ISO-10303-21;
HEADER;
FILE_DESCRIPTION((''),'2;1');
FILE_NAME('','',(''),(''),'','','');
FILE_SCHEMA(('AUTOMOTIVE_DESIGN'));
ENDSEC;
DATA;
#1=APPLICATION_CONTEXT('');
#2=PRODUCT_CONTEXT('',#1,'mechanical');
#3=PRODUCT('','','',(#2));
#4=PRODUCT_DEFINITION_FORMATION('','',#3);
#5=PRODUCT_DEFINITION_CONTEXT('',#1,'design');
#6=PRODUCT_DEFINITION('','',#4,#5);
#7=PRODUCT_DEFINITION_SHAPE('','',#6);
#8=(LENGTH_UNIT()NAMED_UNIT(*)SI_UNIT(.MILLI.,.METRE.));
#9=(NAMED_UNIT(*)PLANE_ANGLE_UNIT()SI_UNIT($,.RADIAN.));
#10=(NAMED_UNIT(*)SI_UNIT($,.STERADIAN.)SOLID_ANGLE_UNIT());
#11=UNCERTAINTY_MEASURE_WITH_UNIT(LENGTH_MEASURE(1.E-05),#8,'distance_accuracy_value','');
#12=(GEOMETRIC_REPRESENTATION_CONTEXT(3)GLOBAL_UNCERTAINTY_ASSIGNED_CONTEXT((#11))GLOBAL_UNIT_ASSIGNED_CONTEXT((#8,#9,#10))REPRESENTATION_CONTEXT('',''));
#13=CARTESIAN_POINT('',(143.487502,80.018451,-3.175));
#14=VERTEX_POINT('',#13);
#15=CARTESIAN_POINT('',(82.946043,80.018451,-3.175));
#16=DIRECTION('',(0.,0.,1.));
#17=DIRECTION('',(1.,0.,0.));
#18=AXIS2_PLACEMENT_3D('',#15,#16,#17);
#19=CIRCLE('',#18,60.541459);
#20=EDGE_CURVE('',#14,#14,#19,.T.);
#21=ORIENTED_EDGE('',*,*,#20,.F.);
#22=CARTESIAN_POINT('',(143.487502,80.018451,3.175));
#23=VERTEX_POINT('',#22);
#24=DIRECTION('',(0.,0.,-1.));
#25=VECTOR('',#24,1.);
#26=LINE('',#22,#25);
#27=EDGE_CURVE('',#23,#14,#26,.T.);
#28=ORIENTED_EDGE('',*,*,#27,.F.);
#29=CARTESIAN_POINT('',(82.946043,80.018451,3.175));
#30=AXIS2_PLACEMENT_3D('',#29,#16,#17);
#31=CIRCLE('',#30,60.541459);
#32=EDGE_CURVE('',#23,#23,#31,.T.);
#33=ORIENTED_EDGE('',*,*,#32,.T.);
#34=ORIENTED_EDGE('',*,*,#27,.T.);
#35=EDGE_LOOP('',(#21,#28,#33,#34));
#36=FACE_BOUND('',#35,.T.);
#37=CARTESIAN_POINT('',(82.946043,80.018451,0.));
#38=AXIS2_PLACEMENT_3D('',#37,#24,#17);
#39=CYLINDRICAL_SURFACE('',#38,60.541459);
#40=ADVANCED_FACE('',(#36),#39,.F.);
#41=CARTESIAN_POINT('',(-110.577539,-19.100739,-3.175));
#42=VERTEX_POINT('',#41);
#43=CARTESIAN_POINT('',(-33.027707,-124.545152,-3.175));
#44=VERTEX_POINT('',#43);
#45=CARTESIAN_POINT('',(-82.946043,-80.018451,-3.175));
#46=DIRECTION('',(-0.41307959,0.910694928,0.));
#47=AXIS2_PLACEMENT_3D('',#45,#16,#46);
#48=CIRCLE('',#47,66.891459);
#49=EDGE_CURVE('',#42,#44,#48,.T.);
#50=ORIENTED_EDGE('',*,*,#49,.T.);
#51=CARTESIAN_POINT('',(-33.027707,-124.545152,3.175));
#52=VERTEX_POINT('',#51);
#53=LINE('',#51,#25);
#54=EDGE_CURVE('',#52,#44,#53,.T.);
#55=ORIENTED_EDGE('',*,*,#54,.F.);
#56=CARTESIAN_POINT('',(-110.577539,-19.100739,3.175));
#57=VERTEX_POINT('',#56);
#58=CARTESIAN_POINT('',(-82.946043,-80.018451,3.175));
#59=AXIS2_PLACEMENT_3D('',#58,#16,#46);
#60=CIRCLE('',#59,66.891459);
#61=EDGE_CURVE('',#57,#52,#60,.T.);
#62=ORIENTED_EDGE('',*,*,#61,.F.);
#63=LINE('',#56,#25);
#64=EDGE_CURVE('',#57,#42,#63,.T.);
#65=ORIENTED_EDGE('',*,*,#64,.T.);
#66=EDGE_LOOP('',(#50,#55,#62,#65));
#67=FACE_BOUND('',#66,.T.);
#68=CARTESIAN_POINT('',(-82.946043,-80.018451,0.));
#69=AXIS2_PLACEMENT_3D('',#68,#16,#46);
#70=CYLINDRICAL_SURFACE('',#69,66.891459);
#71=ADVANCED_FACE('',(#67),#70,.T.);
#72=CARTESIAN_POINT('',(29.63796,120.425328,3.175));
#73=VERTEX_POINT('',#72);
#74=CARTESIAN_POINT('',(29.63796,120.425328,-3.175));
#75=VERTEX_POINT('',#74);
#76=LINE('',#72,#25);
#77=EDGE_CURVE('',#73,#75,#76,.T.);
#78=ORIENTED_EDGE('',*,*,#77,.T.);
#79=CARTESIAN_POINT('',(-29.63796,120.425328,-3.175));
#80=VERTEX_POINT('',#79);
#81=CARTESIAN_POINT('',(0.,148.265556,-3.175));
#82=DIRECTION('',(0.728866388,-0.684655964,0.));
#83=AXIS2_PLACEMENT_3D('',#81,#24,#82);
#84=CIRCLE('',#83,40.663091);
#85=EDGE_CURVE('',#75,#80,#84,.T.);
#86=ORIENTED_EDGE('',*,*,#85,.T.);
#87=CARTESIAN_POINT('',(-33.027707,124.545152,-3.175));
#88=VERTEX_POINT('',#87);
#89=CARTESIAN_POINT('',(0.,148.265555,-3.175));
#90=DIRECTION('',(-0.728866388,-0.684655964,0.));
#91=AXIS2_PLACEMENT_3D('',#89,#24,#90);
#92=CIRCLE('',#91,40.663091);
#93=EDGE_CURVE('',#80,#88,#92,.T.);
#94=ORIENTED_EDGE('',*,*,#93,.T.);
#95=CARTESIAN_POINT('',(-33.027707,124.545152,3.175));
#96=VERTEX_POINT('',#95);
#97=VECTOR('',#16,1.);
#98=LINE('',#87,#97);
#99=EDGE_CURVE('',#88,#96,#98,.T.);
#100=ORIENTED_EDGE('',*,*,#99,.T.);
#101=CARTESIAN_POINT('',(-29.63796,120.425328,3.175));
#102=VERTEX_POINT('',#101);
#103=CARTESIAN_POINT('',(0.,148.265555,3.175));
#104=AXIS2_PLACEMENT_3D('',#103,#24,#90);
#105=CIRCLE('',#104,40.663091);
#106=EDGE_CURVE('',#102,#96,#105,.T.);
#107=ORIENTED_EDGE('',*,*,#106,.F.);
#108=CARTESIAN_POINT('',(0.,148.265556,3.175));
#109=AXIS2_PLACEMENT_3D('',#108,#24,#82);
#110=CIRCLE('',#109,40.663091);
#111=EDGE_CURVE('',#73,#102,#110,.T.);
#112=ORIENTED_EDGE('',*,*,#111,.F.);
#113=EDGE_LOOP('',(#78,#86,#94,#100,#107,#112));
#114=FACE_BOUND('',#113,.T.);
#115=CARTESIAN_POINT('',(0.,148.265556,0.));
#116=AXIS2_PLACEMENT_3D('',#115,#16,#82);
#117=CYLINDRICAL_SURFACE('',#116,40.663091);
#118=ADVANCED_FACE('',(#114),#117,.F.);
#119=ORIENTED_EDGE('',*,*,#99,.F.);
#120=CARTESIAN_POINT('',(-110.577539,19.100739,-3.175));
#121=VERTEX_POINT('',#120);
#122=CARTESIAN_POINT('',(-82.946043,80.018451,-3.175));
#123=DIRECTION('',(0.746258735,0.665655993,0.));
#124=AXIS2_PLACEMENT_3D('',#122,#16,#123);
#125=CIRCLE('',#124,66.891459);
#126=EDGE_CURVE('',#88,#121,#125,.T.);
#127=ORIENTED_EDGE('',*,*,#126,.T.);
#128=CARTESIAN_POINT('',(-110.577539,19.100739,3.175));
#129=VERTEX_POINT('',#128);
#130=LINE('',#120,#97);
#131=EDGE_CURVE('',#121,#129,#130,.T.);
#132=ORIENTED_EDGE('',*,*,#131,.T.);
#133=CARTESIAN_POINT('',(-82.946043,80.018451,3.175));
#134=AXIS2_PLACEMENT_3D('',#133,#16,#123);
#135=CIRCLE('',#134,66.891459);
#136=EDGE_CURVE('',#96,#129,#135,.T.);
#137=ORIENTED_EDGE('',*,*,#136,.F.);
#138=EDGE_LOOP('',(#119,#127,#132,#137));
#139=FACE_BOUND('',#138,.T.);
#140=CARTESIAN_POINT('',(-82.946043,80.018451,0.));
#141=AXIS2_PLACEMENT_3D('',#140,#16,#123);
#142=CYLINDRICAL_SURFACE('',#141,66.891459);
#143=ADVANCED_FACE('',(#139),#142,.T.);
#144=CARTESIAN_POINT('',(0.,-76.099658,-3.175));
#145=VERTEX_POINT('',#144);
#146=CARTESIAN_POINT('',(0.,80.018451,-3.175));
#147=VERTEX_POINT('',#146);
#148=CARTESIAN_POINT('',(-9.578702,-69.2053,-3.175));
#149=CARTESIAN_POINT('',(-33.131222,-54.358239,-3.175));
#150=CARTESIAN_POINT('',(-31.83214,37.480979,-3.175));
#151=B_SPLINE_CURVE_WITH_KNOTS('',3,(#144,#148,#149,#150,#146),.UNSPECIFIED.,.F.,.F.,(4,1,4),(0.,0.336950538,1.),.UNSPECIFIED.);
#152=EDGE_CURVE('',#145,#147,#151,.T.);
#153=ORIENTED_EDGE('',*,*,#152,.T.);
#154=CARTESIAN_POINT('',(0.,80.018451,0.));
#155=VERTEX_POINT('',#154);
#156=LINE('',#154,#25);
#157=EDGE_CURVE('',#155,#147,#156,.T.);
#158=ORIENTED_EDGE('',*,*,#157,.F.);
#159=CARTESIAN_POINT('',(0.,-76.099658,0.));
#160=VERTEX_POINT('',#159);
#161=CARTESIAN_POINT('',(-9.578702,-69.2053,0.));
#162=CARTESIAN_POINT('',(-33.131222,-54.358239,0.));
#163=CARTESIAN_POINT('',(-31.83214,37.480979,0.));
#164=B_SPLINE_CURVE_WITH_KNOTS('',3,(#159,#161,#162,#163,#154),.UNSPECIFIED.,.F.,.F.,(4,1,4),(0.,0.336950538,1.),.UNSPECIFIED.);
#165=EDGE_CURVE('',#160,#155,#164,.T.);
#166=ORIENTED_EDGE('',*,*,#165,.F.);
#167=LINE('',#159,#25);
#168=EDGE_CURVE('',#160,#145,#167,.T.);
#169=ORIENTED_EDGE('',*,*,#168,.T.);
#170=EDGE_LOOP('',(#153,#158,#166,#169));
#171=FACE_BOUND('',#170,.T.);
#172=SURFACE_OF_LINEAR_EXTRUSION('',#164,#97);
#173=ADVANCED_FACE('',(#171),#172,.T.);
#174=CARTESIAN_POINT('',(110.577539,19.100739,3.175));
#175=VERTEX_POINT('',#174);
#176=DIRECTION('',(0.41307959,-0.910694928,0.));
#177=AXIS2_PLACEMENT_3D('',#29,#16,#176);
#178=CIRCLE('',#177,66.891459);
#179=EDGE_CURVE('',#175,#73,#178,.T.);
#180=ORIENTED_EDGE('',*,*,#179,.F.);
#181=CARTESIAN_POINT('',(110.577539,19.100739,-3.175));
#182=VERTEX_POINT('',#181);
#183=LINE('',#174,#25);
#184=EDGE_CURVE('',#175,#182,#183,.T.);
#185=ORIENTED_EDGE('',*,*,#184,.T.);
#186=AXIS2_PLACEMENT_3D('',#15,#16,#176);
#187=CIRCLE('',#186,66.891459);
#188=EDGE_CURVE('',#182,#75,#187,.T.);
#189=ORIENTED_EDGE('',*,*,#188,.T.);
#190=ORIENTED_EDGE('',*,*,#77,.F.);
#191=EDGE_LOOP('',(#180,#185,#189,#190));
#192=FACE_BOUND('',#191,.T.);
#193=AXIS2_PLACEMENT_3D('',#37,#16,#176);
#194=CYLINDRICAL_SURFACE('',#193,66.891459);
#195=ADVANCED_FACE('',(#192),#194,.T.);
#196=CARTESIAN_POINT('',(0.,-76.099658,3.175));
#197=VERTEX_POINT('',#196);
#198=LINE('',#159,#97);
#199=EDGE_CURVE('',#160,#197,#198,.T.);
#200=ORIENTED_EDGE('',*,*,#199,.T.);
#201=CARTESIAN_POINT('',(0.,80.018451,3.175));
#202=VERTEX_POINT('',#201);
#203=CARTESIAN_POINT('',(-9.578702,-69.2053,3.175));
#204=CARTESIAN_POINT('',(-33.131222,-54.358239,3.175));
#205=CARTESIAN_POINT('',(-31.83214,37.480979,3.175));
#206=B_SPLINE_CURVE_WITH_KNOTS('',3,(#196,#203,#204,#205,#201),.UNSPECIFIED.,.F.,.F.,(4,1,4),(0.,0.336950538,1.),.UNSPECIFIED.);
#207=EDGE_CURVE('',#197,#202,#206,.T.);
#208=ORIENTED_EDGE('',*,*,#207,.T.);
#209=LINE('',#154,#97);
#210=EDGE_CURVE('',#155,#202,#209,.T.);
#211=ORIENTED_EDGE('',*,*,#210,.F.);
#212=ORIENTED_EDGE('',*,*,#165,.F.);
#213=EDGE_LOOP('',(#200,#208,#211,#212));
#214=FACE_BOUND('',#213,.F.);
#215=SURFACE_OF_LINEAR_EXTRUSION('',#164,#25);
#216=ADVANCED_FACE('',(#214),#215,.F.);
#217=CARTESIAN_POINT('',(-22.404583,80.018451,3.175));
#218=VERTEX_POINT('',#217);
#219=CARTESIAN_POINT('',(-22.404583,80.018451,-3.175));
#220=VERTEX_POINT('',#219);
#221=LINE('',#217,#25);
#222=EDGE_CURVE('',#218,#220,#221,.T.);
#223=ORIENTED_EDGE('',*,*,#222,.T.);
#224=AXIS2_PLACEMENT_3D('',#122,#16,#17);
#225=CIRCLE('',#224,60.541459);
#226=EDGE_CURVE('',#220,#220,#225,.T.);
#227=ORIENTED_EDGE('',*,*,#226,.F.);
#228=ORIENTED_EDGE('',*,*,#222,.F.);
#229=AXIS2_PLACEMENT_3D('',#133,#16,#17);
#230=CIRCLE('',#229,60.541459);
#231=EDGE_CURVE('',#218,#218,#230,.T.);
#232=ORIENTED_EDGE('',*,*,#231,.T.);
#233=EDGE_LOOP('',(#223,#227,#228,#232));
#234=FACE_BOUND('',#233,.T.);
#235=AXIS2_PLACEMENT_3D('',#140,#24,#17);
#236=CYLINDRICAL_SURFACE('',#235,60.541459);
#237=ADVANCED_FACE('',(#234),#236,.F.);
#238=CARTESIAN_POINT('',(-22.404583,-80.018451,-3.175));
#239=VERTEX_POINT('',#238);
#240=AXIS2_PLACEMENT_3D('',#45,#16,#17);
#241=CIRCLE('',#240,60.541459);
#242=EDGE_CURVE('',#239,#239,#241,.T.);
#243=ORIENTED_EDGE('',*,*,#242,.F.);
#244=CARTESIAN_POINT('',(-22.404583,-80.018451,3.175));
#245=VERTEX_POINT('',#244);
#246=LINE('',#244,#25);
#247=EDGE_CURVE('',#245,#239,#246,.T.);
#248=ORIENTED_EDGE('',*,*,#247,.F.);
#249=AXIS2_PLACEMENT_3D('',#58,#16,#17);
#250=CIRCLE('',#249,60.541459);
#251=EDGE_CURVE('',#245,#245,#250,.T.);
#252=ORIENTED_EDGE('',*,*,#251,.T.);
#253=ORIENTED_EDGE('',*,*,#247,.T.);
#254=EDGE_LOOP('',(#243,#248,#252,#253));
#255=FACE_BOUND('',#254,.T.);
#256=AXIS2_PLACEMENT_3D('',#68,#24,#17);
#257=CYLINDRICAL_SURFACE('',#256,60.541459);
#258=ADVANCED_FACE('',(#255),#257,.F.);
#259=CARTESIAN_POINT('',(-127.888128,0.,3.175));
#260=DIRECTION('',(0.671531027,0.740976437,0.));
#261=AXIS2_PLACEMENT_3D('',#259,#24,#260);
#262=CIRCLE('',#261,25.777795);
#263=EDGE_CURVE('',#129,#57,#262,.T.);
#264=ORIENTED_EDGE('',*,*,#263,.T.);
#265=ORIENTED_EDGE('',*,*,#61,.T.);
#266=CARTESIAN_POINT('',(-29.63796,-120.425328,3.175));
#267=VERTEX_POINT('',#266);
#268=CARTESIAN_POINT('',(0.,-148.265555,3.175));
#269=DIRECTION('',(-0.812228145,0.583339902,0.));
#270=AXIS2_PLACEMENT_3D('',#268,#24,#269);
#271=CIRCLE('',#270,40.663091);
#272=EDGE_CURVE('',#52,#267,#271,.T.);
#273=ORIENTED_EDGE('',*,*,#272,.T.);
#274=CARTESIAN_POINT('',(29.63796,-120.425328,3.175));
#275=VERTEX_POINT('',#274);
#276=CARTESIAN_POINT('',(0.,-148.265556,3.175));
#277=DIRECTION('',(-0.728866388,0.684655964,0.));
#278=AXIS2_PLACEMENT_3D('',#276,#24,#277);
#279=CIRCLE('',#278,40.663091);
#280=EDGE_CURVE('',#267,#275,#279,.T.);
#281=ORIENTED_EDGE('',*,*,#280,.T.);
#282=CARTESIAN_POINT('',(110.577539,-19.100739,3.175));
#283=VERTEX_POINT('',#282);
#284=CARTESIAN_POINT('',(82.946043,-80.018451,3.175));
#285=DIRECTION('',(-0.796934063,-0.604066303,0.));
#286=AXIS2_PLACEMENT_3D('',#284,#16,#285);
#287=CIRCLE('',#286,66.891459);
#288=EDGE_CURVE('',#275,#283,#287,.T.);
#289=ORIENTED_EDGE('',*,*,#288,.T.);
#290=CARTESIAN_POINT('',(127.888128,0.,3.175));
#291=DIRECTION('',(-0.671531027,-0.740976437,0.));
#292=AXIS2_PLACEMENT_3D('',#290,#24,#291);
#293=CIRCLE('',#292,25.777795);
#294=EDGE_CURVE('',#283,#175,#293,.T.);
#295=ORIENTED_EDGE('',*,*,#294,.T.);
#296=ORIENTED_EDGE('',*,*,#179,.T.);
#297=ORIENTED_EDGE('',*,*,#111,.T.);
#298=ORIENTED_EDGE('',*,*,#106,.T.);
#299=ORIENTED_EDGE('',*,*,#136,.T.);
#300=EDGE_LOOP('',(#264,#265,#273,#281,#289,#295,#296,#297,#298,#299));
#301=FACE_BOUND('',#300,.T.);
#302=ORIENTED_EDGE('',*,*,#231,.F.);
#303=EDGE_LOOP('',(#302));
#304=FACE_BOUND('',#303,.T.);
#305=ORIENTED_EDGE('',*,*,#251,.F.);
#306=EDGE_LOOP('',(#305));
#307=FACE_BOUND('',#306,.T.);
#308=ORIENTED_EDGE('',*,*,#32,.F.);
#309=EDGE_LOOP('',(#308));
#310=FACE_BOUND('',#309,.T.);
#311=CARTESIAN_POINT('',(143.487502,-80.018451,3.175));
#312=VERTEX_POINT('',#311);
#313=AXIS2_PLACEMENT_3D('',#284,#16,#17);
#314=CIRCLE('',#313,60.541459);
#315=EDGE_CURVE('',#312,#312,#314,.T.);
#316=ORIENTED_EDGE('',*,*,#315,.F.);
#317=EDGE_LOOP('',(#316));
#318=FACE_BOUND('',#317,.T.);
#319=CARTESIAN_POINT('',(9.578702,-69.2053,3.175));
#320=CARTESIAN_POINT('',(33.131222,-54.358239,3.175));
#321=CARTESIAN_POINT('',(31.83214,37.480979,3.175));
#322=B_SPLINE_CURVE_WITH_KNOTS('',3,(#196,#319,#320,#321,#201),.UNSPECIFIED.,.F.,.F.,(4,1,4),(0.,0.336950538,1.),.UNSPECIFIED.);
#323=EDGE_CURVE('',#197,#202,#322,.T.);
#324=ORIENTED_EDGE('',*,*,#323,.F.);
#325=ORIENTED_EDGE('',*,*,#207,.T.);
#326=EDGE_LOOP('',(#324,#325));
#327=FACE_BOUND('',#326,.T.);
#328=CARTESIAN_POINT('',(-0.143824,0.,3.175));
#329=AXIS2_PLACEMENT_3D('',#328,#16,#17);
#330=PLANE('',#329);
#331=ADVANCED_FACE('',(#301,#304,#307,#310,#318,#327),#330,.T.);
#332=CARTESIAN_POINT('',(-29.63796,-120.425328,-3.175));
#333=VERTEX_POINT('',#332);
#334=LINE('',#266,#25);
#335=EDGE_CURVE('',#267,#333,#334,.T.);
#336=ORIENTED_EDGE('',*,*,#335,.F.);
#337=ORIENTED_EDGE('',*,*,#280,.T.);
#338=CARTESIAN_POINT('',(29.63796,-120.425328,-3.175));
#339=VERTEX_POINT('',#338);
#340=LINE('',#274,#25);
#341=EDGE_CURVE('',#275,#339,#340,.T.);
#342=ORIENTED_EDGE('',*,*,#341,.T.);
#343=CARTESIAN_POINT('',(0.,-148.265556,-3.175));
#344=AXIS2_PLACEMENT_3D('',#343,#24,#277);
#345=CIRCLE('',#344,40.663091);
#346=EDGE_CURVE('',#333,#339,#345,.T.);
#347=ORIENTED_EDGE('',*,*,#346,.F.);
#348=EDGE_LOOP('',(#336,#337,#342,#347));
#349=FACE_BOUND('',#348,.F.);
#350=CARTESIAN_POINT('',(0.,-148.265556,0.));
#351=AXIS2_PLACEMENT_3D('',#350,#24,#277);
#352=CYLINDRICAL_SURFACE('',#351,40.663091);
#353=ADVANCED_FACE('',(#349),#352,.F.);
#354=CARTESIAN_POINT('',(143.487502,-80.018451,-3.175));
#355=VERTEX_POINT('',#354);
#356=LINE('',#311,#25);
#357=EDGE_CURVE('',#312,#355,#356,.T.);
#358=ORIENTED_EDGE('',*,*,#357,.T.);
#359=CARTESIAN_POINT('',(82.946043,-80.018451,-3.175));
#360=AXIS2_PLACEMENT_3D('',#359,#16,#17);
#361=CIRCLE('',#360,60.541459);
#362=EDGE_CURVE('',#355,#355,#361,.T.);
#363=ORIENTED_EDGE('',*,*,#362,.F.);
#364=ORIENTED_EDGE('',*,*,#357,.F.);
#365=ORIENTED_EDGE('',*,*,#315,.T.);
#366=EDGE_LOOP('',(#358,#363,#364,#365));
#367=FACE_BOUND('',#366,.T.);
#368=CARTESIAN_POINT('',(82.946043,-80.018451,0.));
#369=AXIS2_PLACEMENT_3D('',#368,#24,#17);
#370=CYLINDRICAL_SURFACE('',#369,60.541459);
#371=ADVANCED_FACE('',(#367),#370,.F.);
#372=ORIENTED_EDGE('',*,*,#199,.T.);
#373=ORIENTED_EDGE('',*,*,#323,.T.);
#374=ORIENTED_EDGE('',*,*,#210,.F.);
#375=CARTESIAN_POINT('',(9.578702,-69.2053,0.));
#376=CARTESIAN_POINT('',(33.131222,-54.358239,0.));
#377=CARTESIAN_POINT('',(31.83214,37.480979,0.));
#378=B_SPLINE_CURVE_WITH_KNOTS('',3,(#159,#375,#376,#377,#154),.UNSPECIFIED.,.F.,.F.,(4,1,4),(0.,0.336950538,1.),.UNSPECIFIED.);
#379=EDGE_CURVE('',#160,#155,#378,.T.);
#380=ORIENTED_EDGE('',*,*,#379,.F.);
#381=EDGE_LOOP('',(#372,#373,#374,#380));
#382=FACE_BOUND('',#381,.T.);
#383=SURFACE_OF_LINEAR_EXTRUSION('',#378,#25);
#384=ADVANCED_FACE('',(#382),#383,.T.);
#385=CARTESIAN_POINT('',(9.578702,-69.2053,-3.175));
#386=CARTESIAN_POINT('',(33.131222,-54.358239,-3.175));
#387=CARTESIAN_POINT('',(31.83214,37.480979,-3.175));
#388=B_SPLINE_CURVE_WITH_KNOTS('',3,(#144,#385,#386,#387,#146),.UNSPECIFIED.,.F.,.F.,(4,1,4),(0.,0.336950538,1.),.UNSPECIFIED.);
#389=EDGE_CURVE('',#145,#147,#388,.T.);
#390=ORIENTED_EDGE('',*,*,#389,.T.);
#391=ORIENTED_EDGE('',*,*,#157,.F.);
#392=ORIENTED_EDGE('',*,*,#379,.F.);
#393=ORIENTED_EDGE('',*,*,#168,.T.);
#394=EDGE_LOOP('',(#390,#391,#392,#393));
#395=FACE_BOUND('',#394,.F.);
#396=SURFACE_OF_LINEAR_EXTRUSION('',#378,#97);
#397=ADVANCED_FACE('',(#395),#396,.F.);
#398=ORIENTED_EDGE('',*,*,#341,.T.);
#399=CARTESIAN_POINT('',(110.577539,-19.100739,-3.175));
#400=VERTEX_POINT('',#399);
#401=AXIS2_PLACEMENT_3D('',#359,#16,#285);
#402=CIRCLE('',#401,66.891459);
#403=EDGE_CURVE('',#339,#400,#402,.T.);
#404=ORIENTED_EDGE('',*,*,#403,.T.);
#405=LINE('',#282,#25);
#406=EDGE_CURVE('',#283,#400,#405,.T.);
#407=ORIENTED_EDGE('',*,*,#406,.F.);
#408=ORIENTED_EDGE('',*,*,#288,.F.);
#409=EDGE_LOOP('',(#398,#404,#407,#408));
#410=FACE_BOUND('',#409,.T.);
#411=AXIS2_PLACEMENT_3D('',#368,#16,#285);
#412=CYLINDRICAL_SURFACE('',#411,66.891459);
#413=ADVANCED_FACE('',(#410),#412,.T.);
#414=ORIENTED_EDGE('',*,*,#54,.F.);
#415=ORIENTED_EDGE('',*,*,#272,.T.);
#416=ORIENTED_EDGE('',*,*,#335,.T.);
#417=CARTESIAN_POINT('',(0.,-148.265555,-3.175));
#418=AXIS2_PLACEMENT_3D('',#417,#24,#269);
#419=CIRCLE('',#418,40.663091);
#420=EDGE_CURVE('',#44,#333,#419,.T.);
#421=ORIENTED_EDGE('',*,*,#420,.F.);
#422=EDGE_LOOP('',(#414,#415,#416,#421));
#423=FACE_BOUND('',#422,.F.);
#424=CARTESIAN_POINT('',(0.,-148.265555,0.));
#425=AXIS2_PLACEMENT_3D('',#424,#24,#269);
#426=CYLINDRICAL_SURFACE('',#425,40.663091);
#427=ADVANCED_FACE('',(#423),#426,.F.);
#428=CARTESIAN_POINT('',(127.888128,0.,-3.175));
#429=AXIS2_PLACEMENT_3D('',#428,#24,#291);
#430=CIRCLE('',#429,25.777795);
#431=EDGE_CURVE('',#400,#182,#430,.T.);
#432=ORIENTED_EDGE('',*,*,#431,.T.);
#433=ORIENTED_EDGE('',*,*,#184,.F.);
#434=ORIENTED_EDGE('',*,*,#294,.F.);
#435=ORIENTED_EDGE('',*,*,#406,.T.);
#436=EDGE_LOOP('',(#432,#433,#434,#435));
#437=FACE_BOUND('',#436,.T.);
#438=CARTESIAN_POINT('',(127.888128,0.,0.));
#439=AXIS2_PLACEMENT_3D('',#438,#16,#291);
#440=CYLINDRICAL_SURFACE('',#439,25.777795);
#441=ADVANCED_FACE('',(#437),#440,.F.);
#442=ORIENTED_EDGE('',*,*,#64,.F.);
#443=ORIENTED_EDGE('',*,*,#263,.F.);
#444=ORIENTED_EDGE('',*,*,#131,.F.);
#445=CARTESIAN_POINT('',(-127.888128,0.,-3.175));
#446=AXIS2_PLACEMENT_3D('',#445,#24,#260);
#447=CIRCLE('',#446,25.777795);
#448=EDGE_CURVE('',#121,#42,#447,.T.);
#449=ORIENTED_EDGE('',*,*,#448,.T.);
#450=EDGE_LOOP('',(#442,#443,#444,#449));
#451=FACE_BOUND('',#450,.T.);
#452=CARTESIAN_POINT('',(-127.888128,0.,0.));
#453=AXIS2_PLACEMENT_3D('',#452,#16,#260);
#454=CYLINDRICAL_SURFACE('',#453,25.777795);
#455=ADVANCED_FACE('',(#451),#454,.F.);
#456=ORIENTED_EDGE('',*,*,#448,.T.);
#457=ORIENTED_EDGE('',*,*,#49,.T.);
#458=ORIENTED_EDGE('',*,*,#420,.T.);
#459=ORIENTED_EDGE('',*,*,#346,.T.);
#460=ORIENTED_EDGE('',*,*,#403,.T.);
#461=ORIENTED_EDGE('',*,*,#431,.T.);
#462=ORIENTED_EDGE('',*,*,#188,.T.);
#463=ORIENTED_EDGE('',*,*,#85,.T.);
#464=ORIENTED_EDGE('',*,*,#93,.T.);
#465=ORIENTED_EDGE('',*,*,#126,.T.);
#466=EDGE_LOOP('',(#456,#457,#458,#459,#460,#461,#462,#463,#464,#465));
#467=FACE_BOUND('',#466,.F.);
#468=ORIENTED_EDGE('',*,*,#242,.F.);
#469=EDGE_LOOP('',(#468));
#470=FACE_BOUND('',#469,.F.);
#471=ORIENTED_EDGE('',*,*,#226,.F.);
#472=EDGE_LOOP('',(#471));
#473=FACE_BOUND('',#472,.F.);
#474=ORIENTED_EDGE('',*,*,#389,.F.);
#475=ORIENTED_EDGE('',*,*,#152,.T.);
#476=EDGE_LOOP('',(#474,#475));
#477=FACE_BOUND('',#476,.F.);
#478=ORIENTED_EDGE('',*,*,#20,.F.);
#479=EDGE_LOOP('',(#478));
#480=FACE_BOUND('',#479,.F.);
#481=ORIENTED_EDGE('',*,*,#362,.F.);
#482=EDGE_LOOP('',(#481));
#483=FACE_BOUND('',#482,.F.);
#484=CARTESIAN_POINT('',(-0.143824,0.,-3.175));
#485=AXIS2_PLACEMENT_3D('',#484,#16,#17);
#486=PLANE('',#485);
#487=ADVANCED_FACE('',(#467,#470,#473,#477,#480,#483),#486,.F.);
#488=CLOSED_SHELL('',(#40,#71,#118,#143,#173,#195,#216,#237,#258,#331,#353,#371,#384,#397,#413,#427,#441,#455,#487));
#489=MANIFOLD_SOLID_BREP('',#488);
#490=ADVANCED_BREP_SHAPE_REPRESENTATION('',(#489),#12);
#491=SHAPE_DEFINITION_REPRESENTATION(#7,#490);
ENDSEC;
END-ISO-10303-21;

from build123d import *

# Parameters (mm, degrees)
F0_R     = 60.541459453
F2_DEPTH = 3.175


# Not quite as in the source:
# - the program builds the solid bodies; features that only make, move or delete a surface that nothing else refers to are left out


with BuildPart() as f2:
    # F0 (on Top) → F2 (new body, symmetric)
    with BuildSketch(Plane.XY):
        with BuildLine():
            ThreePointArc((29.63795994, 120.4253280383), (0, 107.6024649325), (-29.63795994, 120.4253280383))
            ThreePointArc((-29.63795994, 120.4253280383), (-31.4004725935, 122.4295872496), (-33.0277066154, 124.5451522517))
            ThreePointArc((-33.0277066154, 124.5451522517), (-136.833025163, 119.6500101861), (-110.5775391502, 19.1007385387))
            ThreePointArc((-110.5775391502, 19.1007385387), (-102.1103333636, 0), (-110.5775391502, -19.1007385387))
            ThreePointArc((-110.5775391502, -19.1007385387), (-136.833025163, -119.6500101861), (-33.0277066154, -124.5451522517))
            ThreePointArc((-33.0277066154, -124.5451522517), (-31.4004725935, -122.4295872496), (-29.63795994, -120.4253280383))
            ThreePointArc((-29.63795994, -120.4253280383), (0, -107.6024649325), (29.63795994, -120.4253280383))
            ThreePointArc((29.63795994, -120.4253280383), (135.2096998467, -121.7674331009), (110.5775391502, -19.1007385387))
            ThreePointArc((110.5775391502, -19.1007385387), (102.1103333636, 0), (110.5775391502, 19.1007385387))
            ThreePointArc((110.5775391502, 19.1007385387), (135.2096998467, 121.7674331009), (29.63795994, 120.4253280383))
        make_face()
        with Locations((-82.9460425302, -80.0184514167)):
            Circle(F0_R, mode=Mode.SUBTRACT)
        with Locations((82.9460425302, -80.0184514167)):
            Circle(F0_R, mode=Mode.SUBTRACT)
        with BuildLine():
            add(Edge.make_bspline(
                [(0, -76.0996581864), (9.5787021029, -69.2053000853), (33.1312215182, -54.3582389446), (31.8321399477, 37.4809793102), (0, 80.0184514167)],
                knots=[0, 0, 0, 0, 0.3369505381, 1, 1, 1, 1], degree=3))
            add(Edge.make_bspline(
                [(0, -76.0996581864), (-9.5787021029, -69.2053000853), (-33.1312215182, -54.3582389446), (-31.8321399477, 37.4809793102), (0, 80.0184514167)],
                knots=[0, 0, 0, 0, 0.3369505381, 1, 1, 1, 1], degree=3))
        make_face(mode=Mode.SUBTRACT)
        with Locations((-82.9460425302, 80.0184514167)):
            Circle(F0_R, mode=Mode.SUBTRACT)
        with Locations((82.9460425302, 80.0184514167)):
            Circle(F0_R, mode=Mode.SUBTRACT)
    extrude(amount=F2_DEPTH, both=True)


solid = f2.part
